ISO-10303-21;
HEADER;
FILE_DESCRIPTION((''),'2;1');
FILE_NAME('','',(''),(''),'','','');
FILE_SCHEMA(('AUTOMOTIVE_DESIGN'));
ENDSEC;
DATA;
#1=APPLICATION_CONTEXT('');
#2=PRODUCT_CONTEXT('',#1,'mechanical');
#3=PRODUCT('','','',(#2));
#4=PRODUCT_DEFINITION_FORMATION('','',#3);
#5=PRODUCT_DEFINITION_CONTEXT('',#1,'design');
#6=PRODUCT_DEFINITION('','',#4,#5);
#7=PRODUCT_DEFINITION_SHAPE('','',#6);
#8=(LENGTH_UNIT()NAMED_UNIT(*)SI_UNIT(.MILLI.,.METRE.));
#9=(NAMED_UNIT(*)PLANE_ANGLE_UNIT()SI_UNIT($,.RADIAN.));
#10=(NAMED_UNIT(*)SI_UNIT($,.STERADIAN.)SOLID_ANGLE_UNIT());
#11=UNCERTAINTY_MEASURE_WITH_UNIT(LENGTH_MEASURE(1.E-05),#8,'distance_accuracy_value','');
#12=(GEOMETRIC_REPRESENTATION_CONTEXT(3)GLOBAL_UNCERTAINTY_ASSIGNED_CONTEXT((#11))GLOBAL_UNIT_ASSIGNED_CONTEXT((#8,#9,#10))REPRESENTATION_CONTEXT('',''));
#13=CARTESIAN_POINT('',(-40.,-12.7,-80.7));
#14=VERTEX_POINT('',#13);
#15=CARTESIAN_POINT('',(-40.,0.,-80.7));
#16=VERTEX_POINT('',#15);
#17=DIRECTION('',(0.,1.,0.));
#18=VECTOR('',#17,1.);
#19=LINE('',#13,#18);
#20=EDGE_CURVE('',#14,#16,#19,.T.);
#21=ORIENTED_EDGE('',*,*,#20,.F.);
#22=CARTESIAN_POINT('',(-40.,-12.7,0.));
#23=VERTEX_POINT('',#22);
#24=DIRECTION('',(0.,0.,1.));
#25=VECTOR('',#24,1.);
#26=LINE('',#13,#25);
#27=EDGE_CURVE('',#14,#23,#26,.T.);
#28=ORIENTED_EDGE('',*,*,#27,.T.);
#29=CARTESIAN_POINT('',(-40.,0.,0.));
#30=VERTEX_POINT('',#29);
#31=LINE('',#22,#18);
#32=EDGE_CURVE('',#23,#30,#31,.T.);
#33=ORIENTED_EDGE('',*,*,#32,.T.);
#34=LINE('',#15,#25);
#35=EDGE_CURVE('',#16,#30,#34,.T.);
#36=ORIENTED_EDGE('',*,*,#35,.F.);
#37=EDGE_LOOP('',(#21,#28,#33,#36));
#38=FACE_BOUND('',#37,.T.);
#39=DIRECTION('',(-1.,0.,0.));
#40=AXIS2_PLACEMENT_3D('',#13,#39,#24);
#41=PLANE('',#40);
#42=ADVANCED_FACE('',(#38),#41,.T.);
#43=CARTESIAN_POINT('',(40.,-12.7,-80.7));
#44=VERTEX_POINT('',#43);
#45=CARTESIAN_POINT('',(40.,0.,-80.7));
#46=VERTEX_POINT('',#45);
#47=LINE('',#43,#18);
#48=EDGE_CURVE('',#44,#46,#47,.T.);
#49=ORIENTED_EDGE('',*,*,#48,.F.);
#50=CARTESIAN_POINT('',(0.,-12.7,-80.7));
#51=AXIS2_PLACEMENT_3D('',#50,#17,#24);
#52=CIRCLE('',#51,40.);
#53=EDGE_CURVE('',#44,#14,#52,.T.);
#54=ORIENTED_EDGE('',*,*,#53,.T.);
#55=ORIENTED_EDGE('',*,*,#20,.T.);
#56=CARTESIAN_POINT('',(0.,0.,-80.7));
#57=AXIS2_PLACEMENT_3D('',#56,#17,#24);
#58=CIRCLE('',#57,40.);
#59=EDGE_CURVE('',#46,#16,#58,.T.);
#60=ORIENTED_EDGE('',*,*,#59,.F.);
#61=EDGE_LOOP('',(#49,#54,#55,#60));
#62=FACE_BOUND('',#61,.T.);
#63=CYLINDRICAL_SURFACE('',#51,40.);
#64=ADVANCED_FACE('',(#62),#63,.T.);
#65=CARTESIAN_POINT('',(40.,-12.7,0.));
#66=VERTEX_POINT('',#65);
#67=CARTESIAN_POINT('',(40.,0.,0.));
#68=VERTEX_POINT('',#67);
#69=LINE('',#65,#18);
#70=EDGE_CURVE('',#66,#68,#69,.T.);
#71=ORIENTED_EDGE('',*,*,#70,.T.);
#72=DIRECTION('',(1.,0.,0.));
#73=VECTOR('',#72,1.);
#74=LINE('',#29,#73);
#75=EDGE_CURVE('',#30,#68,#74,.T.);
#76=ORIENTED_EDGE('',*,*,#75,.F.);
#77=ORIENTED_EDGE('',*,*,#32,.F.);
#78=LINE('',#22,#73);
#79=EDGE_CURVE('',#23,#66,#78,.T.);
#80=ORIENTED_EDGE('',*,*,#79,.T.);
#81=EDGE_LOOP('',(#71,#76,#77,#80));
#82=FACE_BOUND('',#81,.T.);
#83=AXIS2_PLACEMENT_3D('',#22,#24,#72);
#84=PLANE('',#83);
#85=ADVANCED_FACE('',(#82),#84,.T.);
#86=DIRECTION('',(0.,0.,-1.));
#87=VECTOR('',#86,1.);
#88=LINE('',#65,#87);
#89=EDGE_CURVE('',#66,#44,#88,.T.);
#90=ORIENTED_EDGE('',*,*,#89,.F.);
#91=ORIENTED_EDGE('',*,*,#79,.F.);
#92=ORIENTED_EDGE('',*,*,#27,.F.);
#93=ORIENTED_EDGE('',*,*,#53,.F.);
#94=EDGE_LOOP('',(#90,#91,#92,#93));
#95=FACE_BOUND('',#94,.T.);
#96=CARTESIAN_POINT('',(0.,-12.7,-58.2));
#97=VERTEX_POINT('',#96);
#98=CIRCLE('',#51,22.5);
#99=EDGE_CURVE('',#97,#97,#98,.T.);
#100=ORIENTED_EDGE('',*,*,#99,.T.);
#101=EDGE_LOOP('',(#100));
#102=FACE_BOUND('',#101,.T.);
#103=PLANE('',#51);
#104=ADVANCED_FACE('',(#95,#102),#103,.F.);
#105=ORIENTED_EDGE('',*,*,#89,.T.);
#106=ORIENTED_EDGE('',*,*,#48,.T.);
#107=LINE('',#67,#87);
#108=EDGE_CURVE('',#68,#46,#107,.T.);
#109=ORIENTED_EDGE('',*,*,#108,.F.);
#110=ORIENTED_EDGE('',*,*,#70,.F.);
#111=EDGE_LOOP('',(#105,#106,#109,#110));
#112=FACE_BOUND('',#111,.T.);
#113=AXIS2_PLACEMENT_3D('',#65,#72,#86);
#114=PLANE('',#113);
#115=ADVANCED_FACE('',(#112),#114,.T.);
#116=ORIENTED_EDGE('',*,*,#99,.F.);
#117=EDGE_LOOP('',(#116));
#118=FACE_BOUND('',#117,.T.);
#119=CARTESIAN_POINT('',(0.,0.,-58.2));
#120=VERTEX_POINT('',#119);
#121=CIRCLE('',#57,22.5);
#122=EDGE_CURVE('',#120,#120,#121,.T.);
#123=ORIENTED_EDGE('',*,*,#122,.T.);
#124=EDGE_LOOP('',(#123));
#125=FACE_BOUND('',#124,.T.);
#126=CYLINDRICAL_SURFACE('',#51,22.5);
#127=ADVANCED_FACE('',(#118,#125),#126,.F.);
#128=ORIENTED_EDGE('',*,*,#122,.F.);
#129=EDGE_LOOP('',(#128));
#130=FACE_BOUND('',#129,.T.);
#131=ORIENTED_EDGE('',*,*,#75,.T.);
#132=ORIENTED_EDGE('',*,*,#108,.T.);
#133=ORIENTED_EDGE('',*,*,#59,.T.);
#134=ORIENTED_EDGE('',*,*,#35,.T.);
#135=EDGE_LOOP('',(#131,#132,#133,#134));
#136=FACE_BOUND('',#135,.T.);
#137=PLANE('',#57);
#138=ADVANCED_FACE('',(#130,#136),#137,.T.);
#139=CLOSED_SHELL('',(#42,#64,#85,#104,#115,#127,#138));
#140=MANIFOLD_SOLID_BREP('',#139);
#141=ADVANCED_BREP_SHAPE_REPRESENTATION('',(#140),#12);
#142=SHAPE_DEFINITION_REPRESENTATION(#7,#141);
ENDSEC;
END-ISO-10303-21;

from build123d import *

# Parameters (mm, degrees)
ESBO_O1_R          = 22.5
FLANGE_BASE1_DEPTH = 12.7


# Sheet-metal steps are written as plain solids
with BuildPart() as part:
    # Esboço1 → Flange-base1 (new body)
    with BuildSketch(Plane(origin=(0, 0, 0), x_dir=(1, 0, 0), z_dir=(0, 1, 0))):
        with BuildLine():
            Line((-40, 0), (40, 0))
            Line((40, 0), (40, 80.7))
            ThreePointArc((40, 80.7), (0, 120.7), (-40, 80.7))
            Line((-40, 80.7), (-40, 0))
        make_face()
        with Locations(Location((0, 80.7, 0), (0, 0, 270))):
            Circle(ESBO_O1_R, mode=Mode.SUBTRACT)
    extrude(amount=-FLANGE_BASE1_DEPTH)


solid = part.part
